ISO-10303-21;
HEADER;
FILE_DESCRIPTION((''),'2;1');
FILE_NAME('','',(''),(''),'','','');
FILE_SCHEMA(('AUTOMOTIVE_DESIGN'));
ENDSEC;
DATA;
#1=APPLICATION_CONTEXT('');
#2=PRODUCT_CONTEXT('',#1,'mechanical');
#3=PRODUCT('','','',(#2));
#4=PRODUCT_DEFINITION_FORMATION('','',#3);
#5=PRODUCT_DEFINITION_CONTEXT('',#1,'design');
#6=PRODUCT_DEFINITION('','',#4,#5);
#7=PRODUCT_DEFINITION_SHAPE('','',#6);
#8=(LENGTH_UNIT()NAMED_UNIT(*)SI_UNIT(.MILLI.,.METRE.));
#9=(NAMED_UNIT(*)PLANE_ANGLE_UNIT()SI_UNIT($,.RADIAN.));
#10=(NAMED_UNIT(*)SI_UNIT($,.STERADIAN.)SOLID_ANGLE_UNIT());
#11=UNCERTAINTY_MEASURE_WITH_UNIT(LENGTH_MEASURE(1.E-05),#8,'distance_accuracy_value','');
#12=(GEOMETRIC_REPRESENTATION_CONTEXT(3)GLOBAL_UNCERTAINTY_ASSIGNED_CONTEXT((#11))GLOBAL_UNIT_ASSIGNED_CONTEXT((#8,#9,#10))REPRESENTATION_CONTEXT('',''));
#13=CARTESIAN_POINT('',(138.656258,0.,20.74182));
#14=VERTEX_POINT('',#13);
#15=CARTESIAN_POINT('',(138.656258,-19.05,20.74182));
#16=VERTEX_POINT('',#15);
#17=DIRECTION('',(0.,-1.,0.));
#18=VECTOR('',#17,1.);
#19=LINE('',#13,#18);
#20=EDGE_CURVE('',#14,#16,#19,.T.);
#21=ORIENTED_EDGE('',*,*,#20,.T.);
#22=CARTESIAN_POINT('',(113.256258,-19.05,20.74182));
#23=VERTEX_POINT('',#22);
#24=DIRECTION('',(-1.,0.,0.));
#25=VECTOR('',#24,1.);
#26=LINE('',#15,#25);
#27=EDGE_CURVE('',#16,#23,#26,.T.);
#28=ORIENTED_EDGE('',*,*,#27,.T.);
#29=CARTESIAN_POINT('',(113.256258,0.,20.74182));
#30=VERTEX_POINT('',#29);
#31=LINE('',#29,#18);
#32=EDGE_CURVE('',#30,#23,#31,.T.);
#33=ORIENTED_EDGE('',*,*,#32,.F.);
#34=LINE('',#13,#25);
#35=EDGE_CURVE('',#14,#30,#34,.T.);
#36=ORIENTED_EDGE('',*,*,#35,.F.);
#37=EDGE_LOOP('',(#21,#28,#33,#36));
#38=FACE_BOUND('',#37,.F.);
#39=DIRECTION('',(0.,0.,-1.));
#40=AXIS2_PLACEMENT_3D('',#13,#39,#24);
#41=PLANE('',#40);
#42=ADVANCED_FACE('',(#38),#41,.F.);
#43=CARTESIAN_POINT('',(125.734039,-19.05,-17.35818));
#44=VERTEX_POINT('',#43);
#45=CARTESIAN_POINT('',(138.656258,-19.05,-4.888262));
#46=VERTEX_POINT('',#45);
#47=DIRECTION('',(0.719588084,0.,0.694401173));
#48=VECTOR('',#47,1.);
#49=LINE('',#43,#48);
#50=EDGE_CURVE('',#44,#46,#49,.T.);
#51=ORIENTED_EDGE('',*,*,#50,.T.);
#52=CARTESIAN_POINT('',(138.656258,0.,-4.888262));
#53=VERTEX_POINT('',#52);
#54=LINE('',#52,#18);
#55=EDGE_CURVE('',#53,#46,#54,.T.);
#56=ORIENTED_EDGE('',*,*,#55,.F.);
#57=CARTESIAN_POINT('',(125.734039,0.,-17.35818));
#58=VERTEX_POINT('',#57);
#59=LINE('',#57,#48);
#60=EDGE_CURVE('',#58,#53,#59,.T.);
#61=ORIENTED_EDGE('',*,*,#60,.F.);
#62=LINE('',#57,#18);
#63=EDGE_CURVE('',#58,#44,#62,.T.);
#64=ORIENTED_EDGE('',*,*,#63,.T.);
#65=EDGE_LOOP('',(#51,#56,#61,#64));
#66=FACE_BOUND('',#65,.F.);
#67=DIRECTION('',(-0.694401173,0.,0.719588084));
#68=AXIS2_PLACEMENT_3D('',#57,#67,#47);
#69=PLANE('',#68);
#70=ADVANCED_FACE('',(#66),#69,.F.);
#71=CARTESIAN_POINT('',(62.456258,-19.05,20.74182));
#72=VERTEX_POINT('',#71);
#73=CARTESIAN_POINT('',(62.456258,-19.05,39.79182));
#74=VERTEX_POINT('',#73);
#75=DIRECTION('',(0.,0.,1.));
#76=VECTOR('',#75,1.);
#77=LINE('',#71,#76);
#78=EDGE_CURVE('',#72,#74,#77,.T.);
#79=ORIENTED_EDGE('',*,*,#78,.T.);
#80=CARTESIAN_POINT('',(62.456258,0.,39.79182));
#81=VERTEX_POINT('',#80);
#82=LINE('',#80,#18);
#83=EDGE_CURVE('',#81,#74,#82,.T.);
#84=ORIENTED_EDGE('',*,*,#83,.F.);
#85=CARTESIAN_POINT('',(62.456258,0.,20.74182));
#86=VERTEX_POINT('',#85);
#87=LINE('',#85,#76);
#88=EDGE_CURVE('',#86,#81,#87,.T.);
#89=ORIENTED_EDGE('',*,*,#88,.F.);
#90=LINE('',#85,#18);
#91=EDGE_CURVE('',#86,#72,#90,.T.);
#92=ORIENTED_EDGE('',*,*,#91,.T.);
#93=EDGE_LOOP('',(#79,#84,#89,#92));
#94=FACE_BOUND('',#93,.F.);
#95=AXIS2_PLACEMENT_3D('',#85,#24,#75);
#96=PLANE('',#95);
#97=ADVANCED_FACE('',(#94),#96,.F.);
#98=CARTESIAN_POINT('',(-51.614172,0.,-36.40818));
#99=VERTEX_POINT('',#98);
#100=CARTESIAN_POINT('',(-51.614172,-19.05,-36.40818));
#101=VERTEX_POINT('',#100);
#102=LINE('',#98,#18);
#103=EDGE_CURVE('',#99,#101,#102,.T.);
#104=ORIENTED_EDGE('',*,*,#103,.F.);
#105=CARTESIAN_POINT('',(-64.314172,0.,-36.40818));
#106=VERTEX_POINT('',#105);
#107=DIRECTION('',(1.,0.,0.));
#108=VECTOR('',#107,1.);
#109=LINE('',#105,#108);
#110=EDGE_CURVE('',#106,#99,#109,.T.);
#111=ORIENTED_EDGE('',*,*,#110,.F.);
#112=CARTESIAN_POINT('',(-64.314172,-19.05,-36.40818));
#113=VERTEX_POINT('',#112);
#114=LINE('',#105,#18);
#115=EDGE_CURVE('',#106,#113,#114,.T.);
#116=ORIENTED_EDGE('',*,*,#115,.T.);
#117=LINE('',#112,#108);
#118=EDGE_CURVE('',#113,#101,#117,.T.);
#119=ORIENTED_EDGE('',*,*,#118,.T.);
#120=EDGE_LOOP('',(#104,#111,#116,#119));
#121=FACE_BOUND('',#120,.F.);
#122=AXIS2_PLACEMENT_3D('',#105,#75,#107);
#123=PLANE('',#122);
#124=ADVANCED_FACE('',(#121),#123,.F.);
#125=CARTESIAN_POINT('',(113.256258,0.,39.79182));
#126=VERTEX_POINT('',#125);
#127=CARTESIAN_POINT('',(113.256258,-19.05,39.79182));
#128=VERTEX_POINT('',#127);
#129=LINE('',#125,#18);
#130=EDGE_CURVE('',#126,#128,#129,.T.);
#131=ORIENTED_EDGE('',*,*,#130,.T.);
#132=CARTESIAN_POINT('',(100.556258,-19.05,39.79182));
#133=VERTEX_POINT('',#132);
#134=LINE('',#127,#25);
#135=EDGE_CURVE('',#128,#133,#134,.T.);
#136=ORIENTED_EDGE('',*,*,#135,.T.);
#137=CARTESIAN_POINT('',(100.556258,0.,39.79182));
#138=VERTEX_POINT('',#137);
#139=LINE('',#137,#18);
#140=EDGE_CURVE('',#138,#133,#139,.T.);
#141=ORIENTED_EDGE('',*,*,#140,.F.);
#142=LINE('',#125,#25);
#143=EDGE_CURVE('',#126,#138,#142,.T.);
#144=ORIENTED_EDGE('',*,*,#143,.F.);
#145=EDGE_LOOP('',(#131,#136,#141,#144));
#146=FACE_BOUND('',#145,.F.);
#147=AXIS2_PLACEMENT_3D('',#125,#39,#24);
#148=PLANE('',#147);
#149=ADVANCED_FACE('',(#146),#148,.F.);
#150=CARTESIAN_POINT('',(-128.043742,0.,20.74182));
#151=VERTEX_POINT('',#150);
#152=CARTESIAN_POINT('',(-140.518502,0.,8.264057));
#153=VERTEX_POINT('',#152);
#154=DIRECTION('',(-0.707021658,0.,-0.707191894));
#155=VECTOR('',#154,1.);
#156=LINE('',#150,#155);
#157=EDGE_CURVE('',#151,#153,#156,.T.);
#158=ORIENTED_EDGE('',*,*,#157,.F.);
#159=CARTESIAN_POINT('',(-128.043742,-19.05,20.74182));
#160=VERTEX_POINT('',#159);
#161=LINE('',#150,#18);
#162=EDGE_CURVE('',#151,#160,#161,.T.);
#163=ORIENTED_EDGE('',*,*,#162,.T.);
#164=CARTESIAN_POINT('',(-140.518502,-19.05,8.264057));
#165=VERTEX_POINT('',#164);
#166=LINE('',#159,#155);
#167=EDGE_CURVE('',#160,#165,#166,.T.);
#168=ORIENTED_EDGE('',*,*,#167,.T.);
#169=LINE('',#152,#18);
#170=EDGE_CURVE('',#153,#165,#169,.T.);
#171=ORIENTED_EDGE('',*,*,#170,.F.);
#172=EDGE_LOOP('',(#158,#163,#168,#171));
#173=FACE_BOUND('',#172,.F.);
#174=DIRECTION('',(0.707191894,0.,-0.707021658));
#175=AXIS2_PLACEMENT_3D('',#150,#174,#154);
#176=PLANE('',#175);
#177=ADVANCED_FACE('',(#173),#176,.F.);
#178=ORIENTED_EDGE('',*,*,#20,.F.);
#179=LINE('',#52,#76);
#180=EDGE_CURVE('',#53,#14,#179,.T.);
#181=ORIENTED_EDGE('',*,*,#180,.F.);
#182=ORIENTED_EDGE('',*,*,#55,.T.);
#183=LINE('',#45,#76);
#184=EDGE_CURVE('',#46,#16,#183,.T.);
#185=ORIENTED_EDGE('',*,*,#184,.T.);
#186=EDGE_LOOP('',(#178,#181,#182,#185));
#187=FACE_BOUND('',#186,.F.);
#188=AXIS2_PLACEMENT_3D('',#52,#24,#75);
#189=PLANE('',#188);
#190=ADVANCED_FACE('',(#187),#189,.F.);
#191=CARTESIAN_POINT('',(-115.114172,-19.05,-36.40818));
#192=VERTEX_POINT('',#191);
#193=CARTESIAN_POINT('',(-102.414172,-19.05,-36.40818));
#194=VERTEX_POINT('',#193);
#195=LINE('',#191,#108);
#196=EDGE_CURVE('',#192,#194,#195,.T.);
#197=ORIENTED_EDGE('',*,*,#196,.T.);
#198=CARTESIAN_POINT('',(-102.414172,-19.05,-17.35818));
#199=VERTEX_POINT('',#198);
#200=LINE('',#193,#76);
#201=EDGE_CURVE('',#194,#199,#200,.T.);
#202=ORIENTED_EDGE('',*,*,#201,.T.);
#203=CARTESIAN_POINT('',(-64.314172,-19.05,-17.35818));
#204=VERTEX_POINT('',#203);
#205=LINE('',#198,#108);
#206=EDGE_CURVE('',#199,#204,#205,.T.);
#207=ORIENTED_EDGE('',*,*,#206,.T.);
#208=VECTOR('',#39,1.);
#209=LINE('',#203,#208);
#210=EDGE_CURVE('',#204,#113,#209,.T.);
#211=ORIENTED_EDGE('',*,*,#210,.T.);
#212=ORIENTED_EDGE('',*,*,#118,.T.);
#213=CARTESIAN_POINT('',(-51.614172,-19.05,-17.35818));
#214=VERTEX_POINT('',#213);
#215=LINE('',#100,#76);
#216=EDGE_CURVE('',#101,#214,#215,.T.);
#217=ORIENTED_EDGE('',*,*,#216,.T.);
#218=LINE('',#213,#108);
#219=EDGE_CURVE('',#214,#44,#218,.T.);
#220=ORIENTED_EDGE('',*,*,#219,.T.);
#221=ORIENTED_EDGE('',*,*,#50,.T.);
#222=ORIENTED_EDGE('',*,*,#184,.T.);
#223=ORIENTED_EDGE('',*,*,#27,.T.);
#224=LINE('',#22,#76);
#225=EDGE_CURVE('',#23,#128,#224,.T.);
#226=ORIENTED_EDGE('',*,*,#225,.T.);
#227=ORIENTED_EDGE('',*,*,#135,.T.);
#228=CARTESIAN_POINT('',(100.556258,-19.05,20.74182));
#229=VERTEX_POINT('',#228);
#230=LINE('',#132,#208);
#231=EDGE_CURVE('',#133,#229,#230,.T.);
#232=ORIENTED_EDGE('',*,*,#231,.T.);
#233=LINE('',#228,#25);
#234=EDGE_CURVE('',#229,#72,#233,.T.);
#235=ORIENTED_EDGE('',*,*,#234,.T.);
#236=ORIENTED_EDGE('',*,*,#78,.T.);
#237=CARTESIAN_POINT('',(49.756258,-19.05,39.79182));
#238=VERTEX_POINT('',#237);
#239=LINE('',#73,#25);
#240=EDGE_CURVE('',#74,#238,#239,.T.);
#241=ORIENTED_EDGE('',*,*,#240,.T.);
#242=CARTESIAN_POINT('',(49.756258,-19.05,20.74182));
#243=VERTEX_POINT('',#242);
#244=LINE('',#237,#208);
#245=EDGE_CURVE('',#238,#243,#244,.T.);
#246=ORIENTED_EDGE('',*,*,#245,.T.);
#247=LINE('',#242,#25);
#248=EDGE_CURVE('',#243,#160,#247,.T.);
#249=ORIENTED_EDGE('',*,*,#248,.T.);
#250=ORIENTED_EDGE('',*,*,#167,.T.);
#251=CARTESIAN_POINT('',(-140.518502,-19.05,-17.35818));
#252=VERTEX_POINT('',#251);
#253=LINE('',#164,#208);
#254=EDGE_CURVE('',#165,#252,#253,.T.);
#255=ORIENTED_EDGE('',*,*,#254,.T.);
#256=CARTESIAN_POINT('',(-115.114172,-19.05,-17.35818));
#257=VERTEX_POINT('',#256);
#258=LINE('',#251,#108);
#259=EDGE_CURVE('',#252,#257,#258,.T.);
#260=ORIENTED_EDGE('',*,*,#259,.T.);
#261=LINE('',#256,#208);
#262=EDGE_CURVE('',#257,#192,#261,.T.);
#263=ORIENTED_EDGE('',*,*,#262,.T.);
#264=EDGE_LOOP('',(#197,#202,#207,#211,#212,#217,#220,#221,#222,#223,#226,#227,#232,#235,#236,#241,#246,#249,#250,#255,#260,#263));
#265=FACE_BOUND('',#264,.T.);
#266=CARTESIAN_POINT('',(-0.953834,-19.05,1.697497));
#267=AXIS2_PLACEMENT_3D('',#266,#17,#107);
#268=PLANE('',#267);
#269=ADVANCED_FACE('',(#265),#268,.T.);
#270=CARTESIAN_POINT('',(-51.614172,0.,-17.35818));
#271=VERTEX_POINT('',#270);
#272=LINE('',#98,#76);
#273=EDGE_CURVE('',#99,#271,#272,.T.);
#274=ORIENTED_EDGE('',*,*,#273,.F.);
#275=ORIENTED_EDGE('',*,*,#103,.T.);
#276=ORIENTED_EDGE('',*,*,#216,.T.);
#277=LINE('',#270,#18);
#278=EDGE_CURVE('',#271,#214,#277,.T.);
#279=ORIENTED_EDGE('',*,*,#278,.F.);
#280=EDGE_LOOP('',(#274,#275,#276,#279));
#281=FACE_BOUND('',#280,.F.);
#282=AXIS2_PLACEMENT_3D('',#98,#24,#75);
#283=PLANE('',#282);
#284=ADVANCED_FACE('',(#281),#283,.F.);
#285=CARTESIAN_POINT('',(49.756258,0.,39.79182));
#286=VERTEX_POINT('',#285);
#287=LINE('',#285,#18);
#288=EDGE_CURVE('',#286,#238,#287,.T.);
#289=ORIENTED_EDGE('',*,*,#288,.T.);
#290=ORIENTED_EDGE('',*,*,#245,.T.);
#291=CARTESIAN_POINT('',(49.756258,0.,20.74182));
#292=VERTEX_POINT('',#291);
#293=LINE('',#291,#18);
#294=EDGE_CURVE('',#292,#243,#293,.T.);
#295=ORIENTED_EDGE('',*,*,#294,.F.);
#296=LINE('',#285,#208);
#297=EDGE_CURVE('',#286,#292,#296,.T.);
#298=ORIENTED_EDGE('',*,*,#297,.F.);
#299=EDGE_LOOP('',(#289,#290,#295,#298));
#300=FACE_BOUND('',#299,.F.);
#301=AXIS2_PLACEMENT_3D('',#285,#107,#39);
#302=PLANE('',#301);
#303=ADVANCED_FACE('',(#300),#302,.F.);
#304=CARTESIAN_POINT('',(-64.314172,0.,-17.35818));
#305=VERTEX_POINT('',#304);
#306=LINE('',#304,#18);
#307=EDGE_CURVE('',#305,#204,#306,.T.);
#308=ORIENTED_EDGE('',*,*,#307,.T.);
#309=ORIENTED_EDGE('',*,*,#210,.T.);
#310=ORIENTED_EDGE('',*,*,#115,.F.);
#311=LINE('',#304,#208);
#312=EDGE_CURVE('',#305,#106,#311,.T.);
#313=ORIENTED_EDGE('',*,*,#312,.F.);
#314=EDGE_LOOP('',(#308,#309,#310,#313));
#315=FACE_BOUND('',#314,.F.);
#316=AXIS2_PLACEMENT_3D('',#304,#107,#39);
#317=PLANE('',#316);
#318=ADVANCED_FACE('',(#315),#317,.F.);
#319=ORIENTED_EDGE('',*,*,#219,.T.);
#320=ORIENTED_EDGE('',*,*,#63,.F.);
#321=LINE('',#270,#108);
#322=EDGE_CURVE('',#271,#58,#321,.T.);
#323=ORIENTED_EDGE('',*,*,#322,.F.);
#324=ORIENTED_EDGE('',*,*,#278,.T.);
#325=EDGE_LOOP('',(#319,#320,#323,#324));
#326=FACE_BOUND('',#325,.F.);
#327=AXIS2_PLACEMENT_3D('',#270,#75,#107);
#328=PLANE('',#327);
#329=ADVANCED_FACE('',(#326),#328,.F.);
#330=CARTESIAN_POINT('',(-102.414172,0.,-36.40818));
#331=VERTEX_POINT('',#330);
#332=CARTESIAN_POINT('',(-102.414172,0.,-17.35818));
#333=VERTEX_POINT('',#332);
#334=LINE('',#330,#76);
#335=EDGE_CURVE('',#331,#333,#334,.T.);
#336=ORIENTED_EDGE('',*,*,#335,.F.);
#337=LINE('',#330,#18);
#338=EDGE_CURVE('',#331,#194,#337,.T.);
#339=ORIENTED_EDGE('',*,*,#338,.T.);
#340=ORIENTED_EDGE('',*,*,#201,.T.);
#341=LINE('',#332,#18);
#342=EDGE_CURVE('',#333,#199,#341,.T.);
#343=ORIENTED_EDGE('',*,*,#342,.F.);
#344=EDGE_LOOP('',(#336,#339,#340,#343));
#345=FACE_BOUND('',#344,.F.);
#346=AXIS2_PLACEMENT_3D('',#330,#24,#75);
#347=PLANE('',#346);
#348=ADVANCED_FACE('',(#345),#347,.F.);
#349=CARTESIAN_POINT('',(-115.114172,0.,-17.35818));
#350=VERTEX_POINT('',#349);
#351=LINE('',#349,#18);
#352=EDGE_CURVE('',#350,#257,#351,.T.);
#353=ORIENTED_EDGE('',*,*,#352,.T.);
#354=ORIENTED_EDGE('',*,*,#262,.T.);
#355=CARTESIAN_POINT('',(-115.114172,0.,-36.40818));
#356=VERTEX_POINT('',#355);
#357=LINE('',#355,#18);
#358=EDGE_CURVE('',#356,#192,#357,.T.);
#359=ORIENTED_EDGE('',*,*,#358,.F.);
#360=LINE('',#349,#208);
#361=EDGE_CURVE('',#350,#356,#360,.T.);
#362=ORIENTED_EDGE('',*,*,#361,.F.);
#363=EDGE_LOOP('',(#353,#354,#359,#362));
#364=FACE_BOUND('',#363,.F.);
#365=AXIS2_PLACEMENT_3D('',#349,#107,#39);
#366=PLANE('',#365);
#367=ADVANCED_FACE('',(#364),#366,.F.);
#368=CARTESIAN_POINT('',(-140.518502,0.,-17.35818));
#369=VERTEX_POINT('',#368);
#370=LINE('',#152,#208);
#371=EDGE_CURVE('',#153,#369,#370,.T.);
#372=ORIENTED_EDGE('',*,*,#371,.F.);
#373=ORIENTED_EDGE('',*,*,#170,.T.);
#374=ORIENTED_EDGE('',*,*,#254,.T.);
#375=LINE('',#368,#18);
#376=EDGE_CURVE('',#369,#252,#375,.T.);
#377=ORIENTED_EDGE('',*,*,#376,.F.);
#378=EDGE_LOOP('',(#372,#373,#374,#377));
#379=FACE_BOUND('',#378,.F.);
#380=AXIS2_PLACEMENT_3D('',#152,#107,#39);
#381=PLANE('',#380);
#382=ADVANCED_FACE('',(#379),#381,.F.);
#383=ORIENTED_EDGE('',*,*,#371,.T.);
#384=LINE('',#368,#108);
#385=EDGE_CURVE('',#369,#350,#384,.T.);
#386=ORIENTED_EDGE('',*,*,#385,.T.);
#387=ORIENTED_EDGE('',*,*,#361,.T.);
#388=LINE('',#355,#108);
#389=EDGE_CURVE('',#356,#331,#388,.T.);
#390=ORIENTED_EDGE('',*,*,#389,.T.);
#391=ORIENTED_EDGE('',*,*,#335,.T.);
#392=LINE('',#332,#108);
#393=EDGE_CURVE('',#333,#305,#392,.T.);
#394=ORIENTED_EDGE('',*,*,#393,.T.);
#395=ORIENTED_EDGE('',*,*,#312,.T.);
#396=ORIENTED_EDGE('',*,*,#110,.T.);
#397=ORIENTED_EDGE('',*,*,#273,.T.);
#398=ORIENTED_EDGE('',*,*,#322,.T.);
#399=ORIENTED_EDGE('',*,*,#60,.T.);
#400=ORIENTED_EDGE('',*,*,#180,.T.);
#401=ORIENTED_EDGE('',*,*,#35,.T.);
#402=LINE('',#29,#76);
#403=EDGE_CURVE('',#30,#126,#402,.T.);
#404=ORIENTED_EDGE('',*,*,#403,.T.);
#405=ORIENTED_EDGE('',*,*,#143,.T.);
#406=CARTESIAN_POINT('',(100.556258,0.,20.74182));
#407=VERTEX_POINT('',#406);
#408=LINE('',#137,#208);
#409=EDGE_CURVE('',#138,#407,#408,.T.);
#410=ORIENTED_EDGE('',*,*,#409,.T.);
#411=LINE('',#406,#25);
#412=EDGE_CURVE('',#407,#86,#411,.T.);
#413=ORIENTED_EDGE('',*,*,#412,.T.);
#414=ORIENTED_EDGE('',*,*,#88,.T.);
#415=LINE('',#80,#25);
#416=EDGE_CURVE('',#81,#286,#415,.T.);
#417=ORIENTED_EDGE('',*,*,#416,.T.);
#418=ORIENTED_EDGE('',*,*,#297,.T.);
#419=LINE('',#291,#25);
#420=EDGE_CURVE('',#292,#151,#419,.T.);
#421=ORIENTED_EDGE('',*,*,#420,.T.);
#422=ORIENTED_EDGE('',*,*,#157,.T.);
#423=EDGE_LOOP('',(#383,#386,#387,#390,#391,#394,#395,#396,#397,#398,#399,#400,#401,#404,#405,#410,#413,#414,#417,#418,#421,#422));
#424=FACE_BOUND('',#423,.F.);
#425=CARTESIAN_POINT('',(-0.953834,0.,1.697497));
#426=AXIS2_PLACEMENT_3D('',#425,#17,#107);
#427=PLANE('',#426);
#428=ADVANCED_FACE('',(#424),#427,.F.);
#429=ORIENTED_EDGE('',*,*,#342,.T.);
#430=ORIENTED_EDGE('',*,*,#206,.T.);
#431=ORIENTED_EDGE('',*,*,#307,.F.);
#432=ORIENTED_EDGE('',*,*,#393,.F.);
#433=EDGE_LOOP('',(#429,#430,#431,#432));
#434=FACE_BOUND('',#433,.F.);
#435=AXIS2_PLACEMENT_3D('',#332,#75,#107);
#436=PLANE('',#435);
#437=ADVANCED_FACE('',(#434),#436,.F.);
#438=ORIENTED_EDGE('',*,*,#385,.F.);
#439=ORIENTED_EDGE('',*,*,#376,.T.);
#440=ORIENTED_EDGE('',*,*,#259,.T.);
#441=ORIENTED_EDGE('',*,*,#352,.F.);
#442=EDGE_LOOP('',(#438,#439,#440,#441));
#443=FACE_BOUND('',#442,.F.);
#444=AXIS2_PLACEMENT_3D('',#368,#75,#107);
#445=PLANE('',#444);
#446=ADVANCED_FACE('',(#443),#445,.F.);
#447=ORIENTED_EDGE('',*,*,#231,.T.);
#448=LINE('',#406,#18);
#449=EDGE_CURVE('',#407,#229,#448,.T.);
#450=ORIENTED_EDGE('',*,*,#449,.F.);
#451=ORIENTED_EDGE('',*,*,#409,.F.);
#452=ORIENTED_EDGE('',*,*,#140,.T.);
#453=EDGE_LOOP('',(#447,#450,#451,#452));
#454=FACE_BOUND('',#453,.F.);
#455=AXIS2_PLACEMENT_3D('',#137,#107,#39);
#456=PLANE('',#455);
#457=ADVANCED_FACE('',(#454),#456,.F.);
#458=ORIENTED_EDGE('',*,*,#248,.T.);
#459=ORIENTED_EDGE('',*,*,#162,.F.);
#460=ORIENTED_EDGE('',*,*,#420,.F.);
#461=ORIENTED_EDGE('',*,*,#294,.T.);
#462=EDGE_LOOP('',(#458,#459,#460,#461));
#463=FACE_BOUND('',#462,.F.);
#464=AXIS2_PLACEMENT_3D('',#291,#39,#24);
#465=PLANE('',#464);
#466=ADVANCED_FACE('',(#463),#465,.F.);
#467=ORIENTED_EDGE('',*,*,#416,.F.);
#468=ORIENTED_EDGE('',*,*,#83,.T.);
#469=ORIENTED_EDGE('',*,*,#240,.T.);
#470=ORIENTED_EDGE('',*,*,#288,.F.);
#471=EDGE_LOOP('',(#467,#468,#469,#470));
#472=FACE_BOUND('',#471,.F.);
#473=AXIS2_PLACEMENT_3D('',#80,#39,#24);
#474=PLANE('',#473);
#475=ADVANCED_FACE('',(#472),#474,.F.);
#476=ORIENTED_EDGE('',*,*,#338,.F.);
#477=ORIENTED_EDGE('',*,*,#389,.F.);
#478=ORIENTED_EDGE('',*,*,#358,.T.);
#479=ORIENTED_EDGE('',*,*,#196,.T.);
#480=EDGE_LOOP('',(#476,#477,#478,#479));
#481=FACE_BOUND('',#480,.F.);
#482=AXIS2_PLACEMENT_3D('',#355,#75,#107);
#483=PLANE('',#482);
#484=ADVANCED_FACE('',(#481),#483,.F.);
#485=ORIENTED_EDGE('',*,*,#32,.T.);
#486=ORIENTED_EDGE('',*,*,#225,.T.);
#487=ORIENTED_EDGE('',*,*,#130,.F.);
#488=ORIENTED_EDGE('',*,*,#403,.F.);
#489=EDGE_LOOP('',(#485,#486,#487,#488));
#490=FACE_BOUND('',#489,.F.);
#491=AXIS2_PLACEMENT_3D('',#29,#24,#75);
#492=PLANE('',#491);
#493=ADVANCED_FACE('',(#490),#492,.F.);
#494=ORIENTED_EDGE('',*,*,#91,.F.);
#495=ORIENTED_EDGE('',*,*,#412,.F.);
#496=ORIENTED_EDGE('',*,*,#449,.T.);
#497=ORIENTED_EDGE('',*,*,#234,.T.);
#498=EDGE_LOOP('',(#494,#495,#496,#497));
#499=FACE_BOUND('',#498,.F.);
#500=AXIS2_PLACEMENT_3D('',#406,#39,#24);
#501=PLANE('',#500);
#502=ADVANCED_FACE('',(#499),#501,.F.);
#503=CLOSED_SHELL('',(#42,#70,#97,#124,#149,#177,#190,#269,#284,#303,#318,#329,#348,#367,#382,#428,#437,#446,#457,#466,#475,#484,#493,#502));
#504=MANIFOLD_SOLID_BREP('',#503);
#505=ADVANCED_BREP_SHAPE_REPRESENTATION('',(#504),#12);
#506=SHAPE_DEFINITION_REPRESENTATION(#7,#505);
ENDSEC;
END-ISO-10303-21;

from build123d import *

# Parameters (mm, degrees)
F1_DEPTH = 19.05


# Not quite as in the source:
# - a feature names something its author has since deleted; it is built from what else it names


with BuildPart() as f1:
    # F0 (on Front) → F1 (new body)
    with BuildSketch(Plane.XZ):
        Polygon((-140.5185023113, -17.3581795608), (-115.1141719677, -17.3581795608), (-115.1141719677, -36.4081795608), (-102.4141719677, -36.4081795608), (-102.4141719677, -17.3581795608), (-64.3141719677, -17.3581795608), (-64.3141719677, -36.4081795608), (-51.6141719677, -36.4081795608), (-51.6141719677, -17.3581795608), (125.7340388179, -17.3581795608), (138.656257718, -4.8882621778), (138.656257718, 20.7418204392), (113.256257718, 20.7418204392), (113.256257718, 39.7918204392), (100.556257718, 39.7918204392), (100.556257718, 20.7418204392), (62.456257718, 20.7418204392), (62.456257718, 39.7918204392), (49.756257718, 39.7918204392), (49.756257718, 20.7418204392), (-128.043742282, 20.7418204392), (-140.5185023113, 8.2640567404), align=None)
    extrude(amount=F1_DEPTH)


solid = f1.part
